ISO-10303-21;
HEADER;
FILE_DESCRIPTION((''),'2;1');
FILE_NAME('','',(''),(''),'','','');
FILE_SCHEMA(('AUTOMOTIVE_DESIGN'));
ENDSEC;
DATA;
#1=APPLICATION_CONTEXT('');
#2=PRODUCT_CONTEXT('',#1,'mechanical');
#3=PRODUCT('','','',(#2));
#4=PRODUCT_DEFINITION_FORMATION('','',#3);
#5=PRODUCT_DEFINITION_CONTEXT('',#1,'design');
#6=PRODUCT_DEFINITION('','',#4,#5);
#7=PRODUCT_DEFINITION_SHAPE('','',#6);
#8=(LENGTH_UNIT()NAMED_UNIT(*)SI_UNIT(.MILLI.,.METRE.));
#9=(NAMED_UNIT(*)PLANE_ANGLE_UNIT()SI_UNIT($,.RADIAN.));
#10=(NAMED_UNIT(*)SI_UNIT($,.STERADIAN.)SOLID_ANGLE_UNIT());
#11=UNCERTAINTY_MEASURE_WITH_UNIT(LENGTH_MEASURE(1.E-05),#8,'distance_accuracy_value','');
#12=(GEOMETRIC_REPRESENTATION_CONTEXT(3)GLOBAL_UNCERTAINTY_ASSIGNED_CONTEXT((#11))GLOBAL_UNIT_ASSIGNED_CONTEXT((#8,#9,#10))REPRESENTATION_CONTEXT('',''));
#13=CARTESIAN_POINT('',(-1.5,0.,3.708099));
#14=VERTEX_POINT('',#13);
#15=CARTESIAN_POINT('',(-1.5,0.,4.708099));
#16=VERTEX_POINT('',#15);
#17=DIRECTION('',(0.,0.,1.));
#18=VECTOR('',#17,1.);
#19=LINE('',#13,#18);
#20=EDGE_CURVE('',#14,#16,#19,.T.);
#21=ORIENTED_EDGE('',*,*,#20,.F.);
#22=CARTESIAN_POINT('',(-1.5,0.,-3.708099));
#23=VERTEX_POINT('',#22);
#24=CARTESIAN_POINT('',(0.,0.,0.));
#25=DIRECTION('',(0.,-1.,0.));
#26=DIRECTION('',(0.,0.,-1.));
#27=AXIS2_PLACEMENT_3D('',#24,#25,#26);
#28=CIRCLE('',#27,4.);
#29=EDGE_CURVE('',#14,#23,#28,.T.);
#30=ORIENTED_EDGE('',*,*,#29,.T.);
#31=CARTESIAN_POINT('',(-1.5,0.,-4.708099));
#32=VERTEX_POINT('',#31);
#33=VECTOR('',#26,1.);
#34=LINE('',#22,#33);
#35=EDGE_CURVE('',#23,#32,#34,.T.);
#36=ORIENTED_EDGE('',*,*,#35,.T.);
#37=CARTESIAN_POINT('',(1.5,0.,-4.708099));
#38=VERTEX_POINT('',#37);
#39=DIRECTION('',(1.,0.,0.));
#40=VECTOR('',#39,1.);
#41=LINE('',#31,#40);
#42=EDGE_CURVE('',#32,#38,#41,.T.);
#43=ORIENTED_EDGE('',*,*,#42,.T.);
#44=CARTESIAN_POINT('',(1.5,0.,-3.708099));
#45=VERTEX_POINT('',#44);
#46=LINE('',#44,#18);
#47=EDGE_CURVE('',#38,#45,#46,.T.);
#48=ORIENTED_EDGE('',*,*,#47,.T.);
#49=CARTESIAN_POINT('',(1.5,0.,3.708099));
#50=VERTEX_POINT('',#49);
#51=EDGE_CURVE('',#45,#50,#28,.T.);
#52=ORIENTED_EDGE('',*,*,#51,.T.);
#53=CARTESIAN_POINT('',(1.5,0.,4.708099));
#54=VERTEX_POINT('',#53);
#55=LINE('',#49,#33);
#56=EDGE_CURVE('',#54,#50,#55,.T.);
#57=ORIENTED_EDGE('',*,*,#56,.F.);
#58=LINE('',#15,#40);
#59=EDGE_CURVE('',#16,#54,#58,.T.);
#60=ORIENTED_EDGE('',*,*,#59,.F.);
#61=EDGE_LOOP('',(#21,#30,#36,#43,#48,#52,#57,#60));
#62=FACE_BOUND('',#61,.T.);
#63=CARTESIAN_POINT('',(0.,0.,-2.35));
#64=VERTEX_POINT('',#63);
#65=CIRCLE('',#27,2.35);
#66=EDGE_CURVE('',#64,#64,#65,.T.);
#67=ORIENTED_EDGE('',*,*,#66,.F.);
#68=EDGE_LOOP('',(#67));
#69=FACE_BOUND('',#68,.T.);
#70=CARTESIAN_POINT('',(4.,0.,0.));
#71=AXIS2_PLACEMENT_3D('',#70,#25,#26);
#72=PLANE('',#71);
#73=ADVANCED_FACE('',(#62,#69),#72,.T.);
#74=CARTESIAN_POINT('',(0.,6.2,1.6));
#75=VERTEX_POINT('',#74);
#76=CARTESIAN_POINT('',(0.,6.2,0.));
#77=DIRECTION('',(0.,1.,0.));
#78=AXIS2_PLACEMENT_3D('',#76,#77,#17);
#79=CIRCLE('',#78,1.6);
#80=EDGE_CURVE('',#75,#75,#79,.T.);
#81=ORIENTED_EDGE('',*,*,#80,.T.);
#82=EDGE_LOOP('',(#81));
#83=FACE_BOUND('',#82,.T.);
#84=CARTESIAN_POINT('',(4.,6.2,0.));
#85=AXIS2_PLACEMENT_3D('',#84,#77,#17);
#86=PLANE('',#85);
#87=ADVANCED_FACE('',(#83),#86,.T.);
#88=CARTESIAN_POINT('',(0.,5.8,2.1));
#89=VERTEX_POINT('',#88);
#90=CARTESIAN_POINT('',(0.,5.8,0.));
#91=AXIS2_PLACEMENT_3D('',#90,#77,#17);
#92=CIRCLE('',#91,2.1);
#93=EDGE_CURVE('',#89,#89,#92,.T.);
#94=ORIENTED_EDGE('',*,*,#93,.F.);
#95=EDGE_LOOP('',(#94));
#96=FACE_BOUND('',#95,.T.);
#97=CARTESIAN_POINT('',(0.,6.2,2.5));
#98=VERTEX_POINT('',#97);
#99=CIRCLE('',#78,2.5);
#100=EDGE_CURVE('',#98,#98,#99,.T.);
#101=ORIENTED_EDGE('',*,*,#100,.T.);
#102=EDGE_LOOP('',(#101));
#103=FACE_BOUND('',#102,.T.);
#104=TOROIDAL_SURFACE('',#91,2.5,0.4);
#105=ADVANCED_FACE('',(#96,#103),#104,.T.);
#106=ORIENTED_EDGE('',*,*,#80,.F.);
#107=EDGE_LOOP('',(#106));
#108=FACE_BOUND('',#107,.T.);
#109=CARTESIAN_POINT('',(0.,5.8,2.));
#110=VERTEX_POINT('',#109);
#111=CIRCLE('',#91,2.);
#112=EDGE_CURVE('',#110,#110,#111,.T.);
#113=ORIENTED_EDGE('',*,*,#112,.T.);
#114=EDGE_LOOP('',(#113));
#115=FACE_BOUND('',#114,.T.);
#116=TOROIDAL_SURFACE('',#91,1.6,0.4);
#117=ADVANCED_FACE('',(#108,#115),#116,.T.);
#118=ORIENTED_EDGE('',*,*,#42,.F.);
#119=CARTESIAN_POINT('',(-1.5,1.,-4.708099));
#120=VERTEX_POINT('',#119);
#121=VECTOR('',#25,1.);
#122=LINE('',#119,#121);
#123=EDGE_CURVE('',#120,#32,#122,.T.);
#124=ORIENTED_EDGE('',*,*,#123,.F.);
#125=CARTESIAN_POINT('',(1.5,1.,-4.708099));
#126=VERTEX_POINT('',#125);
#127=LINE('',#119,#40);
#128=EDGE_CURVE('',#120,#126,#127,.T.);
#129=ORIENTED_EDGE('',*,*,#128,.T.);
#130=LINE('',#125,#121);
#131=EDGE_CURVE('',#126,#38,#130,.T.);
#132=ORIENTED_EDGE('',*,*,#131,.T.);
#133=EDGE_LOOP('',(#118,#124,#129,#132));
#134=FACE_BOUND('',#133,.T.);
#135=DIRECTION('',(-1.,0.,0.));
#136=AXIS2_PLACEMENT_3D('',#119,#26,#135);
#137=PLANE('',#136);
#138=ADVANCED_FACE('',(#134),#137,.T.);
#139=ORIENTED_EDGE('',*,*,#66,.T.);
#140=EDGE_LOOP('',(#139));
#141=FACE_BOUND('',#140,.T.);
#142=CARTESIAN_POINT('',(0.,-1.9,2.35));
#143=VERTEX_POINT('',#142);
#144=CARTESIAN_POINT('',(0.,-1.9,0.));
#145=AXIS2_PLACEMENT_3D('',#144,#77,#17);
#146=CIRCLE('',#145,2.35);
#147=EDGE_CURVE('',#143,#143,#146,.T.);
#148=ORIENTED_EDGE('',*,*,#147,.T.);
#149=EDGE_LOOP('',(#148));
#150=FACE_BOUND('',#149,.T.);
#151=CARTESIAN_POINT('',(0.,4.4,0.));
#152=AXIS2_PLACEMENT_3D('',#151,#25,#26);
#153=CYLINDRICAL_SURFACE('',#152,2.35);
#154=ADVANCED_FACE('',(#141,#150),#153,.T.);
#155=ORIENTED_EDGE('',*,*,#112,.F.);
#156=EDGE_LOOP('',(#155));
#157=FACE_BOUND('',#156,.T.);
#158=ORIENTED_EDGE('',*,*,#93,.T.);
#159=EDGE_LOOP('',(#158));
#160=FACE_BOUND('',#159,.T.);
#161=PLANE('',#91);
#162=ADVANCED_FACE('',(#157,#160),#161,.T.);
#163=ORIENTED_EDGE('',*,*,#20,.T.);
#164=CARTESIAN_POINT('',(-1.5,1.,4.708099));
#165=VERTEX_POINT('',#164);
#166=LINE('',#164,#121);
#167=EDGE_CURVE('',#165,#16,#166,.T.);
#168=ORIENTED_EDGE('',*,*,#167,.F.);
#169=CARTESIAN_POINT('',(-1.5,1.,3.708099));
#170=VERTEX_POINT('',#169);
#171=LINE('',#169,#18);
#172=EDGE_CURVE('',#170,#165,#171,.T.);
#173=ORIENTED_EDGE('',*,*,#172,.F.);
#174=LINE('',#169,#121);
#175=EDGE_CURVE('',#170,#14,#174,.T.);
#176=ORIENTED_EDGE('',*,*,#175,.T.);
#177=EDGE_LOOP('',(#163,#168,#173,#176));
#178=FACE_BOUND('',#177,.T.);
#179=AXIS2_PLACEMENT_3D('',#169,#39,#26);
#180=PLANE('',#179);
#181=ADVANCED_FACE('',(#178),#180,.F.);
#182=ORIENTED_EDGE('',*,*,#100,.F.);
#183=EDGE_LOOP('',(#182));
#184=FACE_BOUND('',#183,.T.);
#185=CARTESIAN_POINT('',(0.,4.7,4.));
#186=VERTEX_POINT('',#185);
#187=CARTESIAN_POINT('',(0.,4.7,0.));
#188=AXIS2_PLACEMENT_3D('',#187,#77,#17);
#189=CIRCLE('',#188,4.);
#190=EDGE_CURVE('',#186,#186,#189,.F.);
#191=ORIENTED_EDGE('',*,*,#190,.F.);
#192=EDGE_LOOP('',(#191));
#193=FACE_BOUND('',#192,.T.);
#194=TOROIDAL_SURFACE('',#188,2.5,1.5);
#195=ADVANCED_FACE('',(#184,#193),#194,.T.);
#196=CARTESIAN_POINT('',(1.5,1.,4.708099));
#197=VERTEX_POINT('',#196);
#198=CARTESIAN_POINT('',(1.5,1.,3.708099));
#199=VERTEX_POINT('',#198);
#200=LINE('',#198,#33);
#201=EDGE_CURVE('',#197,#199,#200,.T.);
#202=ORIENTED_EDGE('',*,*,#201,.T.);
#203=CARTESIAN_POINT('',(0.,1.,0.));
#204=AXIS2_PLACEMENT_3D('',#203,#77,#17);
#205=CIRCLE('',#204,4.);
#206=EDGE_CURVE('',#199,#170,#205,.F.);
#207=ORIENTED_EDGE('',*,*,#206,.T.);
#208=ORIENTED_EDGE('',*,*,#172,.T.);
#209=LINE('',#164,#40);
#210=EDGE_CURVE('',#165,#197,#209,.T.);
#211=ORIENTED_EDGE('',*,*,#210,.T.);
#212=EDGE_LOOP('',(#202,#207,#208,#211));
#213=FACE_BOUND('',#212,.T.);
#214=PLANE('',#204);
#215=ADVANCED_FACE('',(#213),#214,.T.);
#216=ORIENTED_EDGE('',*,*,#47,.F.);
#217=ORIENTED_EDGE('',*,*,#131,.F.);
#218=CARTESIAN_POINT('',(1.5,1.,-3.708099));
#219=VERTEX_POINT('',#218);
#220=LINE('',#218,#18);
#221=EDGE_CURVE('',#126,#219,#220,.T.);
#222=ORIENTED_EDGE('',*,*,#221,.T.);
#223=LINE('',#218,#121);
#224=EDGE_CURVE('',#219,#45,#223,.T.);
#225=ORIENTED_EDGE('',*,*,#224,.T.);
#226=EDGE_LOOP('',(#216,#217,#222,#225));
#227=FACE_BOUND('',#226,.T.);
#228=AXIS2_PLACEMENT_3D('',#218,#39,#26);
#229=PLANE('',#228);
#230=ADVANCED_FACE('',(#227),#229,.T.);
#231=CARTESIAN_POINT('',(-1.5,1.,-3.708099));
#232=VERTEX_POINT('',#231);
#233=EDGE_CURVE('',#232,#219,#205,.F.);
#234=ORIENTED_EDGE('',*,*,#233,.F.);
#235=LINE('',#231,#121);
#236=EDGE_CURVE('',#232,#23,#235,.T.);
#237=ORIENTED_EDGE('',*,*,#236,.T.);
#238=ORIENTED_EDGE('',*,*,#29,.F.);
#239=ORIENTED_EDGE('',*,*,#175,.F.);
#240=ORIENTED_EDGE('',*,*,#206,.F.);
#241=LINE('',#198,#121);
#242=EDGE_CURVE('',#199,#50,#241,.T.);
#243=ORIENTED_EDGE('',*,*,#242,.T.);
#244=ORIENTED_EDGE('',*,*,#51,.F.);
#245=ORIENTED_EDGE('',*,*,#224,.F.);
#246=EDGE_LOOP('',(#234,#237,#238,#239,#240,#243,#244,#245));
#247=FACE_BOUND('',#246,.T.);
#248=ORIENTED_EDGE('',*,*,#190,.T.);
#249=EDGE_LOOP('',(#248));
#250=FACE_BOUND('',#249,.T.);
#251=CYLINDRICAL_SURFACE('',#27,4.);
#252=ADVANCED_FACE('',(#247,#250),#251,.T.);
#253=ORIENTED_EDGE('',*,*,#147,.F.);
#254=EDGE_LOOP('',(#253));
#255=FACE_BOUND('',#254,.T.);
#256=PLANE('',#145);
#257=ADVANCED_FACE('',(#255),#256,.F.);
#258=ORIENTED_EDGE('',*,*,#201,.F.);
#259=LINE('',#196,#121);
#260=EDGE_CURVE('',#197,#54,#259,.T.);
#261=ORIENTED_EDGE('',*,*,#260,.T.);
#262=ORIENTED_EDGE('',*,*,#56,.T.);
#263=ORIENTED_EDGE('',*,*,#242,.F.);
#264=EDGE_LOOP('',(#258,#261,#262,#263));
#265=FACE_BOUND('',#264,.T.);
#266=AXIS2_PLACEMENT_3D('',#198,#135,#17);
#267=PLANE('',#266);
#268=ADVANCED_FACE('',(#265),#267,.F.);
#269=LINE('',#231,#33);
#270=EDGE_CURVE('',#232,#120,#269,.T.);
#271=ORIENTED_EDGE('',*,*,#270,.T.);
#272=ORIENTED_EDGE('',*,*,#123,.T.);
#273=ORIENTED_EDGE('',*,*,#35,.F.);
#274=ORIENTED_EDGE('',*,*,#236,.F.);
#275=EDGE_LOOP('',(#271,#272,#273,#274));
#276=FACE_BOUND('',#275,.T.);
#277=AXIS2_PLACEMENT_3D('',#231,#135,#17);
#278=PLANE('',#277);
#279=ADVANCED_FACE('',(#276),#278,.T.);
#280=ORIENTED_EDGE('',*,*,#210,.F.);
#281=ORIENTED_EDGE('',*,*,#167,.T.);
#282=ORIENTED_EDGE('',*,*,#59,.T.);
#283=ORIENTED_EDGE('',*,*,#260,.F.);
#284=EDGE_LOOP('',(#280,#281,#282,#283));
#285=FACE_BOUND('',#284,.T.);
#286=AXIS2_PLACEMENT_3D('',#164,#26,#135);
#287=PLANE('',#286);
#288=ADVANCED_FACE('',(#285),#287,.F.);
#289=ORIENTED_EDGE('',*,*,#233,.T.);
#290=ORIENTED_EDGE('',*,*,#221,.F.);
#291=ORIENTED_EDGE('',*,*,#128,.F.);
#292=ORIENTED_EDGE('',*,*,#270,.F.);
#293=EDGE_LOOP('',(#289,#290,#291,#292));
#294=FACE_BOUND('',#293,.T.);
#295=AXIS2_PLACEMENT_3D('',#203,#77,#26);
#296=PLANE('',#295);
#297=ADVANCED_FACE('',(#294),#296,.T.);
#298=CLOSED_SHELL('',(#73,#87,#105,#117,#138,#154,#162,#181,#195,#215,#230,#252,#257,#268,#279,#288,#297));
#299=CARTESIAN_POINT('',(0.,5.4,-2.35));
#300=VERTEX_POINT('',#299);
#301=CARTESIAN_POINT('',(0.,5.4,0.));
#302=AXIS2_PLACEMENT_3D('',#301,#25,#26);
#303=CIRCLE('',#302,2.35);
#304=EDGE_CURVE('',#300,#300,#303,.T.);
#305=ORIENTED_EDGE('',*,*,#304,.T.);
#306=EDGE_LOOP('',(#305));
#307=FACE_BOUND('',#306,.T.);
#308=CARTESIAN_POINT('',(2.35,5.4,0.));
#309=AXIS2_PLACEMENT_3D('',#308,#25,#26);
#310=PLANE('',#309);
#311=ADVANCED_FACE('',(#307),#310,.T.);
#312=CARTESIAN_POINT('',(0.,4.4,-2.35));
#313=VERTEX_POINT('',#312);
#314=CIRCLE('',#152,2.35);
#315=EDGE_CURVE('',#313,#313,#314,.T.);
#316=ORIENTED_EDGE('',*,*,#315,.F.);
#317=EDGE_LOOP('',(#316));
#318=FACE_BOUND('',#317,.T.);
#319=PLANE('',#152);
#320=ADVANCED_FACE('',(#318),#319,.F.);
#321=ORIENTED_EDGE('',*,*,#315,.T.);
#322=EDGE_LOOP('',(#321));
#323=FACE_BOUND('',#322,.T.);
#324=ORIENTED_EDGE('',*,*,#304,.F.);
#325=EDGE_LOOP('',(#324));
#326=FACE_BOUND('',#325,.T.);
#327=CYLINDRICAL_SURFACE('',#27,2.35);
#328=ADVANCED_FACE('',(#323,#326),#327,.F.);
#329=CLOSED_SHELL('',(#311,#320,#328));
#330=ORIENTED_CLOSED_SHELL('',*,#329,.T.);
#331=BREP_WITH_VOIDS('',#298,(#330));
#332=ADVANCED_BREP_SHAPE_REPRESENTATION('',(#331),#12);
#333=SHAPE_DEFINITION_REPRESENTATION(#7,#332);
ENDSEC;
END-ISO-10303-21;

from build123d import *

# Parameters (mm, degrees)
SKETCH3_W                = 3
SKETCH3_H                = 1
BOSS_EXTRUDE2_DEPTH      = 1
FILLET1_R                = 1.5
SKETCH5_R                = 2.1
SKETCH5_R_2              = 2
CUT_EXTRUDE1_DEPTH       = 0.4
FILLET2_R                = 0.4
BOSS_EXTRUDE3_DEPTH      = 1.9
BOSS_EXTRUDE3_DEPTH_BACK = 4.4
SKETCH6_R                = 2.35


with BuildPart() as part:
    # Sketch1 → Revolve1 (revolve)
    with BuildSketch(Plane.XY, mode=Mode.PRIVATE) as revolve1_sk:
        Polygon((4, 0), (2.35, 0), (2.35, 5.4), (0, 5.4), (0, 6.2), (4, 6.2), align=None)
    revolve(revolve1_sk.sketch.rotate(Axis((0, 0, 0), (0, 1, 0)), 90), axis=Axis((0, 0, 0), (0, 1, 0)))

    # Sketch3 → Boss-Extrude2 (add)
    with BuildSketch(Plane(origin=(0, 0, 0), x_dir=(1, 0, 0), z_dir=(0, 1, 0))):
        with Locations((0, -4.208099244)):
            Rectangle(SKETCH3_W, SKETCH3_H)
    boss_extrude2 = extrude(amount=BOSS_EXTRUDE2_DEPTH)

    # Mirror2: Boss-Extrude2 across plane
    add(boss_extrude2.mirror(Plane.XY))

    # Fillet1
    fillet1_edges = [part.edges().sort_by_distance(p)[0] for p in [
        (0, 6.2, 4),
    ]]
    fillet(fillet1_edges, radius=FILLET1_R)

    # Sketch5 → Cut-Extrude1 (cut)
    with BuildSketch(Plane(origin=(0, 6.2, 0), x_dir=(1, 0, 0), z_dir=(0, 1, 0))):
        with Locations(Location((0, 0, 0), (0, 0, 270))):
            Circle(SKETCH5_R)
        with Locations(Location((0, 0, 0), (0, 0, 270))):
            Circle(SKETCH5_R_2, mode=Mode.SUBTRACT)
    extrude(amount=-CUT_EXTRUDE1_DEPTH, mode=Mode.SUBTRACT)

    # Fillet2
    fillet2_edges = [part.edges().sort_by_distance(p)[0] for p in [
        (0, 6.2, -2.1),
        (0, 6.2, -2),
    ]]
    fillet(fillet2_edges, radius=FILLET2_R - 0.0001)  # a hair under: the kernel refuses the full size

    # Sketch6 → Boss-Extrude3 (add, two sides: drawn at the far end of the back side and taken through both)
    with BuildSketch(Plane.XZ.offset(-BOSS_EXTRUDE3_DEPTH_BACK)):
        with Locations(Location((0, 0, 0), (0, 0, 270))):
            Circle(SKETCH6_R)
    extrude(amount=BOSS_EXTRUDE3_DEPTH + BOSS_EXTRUDE3_DEPTH_BACK)


solid = part.part
